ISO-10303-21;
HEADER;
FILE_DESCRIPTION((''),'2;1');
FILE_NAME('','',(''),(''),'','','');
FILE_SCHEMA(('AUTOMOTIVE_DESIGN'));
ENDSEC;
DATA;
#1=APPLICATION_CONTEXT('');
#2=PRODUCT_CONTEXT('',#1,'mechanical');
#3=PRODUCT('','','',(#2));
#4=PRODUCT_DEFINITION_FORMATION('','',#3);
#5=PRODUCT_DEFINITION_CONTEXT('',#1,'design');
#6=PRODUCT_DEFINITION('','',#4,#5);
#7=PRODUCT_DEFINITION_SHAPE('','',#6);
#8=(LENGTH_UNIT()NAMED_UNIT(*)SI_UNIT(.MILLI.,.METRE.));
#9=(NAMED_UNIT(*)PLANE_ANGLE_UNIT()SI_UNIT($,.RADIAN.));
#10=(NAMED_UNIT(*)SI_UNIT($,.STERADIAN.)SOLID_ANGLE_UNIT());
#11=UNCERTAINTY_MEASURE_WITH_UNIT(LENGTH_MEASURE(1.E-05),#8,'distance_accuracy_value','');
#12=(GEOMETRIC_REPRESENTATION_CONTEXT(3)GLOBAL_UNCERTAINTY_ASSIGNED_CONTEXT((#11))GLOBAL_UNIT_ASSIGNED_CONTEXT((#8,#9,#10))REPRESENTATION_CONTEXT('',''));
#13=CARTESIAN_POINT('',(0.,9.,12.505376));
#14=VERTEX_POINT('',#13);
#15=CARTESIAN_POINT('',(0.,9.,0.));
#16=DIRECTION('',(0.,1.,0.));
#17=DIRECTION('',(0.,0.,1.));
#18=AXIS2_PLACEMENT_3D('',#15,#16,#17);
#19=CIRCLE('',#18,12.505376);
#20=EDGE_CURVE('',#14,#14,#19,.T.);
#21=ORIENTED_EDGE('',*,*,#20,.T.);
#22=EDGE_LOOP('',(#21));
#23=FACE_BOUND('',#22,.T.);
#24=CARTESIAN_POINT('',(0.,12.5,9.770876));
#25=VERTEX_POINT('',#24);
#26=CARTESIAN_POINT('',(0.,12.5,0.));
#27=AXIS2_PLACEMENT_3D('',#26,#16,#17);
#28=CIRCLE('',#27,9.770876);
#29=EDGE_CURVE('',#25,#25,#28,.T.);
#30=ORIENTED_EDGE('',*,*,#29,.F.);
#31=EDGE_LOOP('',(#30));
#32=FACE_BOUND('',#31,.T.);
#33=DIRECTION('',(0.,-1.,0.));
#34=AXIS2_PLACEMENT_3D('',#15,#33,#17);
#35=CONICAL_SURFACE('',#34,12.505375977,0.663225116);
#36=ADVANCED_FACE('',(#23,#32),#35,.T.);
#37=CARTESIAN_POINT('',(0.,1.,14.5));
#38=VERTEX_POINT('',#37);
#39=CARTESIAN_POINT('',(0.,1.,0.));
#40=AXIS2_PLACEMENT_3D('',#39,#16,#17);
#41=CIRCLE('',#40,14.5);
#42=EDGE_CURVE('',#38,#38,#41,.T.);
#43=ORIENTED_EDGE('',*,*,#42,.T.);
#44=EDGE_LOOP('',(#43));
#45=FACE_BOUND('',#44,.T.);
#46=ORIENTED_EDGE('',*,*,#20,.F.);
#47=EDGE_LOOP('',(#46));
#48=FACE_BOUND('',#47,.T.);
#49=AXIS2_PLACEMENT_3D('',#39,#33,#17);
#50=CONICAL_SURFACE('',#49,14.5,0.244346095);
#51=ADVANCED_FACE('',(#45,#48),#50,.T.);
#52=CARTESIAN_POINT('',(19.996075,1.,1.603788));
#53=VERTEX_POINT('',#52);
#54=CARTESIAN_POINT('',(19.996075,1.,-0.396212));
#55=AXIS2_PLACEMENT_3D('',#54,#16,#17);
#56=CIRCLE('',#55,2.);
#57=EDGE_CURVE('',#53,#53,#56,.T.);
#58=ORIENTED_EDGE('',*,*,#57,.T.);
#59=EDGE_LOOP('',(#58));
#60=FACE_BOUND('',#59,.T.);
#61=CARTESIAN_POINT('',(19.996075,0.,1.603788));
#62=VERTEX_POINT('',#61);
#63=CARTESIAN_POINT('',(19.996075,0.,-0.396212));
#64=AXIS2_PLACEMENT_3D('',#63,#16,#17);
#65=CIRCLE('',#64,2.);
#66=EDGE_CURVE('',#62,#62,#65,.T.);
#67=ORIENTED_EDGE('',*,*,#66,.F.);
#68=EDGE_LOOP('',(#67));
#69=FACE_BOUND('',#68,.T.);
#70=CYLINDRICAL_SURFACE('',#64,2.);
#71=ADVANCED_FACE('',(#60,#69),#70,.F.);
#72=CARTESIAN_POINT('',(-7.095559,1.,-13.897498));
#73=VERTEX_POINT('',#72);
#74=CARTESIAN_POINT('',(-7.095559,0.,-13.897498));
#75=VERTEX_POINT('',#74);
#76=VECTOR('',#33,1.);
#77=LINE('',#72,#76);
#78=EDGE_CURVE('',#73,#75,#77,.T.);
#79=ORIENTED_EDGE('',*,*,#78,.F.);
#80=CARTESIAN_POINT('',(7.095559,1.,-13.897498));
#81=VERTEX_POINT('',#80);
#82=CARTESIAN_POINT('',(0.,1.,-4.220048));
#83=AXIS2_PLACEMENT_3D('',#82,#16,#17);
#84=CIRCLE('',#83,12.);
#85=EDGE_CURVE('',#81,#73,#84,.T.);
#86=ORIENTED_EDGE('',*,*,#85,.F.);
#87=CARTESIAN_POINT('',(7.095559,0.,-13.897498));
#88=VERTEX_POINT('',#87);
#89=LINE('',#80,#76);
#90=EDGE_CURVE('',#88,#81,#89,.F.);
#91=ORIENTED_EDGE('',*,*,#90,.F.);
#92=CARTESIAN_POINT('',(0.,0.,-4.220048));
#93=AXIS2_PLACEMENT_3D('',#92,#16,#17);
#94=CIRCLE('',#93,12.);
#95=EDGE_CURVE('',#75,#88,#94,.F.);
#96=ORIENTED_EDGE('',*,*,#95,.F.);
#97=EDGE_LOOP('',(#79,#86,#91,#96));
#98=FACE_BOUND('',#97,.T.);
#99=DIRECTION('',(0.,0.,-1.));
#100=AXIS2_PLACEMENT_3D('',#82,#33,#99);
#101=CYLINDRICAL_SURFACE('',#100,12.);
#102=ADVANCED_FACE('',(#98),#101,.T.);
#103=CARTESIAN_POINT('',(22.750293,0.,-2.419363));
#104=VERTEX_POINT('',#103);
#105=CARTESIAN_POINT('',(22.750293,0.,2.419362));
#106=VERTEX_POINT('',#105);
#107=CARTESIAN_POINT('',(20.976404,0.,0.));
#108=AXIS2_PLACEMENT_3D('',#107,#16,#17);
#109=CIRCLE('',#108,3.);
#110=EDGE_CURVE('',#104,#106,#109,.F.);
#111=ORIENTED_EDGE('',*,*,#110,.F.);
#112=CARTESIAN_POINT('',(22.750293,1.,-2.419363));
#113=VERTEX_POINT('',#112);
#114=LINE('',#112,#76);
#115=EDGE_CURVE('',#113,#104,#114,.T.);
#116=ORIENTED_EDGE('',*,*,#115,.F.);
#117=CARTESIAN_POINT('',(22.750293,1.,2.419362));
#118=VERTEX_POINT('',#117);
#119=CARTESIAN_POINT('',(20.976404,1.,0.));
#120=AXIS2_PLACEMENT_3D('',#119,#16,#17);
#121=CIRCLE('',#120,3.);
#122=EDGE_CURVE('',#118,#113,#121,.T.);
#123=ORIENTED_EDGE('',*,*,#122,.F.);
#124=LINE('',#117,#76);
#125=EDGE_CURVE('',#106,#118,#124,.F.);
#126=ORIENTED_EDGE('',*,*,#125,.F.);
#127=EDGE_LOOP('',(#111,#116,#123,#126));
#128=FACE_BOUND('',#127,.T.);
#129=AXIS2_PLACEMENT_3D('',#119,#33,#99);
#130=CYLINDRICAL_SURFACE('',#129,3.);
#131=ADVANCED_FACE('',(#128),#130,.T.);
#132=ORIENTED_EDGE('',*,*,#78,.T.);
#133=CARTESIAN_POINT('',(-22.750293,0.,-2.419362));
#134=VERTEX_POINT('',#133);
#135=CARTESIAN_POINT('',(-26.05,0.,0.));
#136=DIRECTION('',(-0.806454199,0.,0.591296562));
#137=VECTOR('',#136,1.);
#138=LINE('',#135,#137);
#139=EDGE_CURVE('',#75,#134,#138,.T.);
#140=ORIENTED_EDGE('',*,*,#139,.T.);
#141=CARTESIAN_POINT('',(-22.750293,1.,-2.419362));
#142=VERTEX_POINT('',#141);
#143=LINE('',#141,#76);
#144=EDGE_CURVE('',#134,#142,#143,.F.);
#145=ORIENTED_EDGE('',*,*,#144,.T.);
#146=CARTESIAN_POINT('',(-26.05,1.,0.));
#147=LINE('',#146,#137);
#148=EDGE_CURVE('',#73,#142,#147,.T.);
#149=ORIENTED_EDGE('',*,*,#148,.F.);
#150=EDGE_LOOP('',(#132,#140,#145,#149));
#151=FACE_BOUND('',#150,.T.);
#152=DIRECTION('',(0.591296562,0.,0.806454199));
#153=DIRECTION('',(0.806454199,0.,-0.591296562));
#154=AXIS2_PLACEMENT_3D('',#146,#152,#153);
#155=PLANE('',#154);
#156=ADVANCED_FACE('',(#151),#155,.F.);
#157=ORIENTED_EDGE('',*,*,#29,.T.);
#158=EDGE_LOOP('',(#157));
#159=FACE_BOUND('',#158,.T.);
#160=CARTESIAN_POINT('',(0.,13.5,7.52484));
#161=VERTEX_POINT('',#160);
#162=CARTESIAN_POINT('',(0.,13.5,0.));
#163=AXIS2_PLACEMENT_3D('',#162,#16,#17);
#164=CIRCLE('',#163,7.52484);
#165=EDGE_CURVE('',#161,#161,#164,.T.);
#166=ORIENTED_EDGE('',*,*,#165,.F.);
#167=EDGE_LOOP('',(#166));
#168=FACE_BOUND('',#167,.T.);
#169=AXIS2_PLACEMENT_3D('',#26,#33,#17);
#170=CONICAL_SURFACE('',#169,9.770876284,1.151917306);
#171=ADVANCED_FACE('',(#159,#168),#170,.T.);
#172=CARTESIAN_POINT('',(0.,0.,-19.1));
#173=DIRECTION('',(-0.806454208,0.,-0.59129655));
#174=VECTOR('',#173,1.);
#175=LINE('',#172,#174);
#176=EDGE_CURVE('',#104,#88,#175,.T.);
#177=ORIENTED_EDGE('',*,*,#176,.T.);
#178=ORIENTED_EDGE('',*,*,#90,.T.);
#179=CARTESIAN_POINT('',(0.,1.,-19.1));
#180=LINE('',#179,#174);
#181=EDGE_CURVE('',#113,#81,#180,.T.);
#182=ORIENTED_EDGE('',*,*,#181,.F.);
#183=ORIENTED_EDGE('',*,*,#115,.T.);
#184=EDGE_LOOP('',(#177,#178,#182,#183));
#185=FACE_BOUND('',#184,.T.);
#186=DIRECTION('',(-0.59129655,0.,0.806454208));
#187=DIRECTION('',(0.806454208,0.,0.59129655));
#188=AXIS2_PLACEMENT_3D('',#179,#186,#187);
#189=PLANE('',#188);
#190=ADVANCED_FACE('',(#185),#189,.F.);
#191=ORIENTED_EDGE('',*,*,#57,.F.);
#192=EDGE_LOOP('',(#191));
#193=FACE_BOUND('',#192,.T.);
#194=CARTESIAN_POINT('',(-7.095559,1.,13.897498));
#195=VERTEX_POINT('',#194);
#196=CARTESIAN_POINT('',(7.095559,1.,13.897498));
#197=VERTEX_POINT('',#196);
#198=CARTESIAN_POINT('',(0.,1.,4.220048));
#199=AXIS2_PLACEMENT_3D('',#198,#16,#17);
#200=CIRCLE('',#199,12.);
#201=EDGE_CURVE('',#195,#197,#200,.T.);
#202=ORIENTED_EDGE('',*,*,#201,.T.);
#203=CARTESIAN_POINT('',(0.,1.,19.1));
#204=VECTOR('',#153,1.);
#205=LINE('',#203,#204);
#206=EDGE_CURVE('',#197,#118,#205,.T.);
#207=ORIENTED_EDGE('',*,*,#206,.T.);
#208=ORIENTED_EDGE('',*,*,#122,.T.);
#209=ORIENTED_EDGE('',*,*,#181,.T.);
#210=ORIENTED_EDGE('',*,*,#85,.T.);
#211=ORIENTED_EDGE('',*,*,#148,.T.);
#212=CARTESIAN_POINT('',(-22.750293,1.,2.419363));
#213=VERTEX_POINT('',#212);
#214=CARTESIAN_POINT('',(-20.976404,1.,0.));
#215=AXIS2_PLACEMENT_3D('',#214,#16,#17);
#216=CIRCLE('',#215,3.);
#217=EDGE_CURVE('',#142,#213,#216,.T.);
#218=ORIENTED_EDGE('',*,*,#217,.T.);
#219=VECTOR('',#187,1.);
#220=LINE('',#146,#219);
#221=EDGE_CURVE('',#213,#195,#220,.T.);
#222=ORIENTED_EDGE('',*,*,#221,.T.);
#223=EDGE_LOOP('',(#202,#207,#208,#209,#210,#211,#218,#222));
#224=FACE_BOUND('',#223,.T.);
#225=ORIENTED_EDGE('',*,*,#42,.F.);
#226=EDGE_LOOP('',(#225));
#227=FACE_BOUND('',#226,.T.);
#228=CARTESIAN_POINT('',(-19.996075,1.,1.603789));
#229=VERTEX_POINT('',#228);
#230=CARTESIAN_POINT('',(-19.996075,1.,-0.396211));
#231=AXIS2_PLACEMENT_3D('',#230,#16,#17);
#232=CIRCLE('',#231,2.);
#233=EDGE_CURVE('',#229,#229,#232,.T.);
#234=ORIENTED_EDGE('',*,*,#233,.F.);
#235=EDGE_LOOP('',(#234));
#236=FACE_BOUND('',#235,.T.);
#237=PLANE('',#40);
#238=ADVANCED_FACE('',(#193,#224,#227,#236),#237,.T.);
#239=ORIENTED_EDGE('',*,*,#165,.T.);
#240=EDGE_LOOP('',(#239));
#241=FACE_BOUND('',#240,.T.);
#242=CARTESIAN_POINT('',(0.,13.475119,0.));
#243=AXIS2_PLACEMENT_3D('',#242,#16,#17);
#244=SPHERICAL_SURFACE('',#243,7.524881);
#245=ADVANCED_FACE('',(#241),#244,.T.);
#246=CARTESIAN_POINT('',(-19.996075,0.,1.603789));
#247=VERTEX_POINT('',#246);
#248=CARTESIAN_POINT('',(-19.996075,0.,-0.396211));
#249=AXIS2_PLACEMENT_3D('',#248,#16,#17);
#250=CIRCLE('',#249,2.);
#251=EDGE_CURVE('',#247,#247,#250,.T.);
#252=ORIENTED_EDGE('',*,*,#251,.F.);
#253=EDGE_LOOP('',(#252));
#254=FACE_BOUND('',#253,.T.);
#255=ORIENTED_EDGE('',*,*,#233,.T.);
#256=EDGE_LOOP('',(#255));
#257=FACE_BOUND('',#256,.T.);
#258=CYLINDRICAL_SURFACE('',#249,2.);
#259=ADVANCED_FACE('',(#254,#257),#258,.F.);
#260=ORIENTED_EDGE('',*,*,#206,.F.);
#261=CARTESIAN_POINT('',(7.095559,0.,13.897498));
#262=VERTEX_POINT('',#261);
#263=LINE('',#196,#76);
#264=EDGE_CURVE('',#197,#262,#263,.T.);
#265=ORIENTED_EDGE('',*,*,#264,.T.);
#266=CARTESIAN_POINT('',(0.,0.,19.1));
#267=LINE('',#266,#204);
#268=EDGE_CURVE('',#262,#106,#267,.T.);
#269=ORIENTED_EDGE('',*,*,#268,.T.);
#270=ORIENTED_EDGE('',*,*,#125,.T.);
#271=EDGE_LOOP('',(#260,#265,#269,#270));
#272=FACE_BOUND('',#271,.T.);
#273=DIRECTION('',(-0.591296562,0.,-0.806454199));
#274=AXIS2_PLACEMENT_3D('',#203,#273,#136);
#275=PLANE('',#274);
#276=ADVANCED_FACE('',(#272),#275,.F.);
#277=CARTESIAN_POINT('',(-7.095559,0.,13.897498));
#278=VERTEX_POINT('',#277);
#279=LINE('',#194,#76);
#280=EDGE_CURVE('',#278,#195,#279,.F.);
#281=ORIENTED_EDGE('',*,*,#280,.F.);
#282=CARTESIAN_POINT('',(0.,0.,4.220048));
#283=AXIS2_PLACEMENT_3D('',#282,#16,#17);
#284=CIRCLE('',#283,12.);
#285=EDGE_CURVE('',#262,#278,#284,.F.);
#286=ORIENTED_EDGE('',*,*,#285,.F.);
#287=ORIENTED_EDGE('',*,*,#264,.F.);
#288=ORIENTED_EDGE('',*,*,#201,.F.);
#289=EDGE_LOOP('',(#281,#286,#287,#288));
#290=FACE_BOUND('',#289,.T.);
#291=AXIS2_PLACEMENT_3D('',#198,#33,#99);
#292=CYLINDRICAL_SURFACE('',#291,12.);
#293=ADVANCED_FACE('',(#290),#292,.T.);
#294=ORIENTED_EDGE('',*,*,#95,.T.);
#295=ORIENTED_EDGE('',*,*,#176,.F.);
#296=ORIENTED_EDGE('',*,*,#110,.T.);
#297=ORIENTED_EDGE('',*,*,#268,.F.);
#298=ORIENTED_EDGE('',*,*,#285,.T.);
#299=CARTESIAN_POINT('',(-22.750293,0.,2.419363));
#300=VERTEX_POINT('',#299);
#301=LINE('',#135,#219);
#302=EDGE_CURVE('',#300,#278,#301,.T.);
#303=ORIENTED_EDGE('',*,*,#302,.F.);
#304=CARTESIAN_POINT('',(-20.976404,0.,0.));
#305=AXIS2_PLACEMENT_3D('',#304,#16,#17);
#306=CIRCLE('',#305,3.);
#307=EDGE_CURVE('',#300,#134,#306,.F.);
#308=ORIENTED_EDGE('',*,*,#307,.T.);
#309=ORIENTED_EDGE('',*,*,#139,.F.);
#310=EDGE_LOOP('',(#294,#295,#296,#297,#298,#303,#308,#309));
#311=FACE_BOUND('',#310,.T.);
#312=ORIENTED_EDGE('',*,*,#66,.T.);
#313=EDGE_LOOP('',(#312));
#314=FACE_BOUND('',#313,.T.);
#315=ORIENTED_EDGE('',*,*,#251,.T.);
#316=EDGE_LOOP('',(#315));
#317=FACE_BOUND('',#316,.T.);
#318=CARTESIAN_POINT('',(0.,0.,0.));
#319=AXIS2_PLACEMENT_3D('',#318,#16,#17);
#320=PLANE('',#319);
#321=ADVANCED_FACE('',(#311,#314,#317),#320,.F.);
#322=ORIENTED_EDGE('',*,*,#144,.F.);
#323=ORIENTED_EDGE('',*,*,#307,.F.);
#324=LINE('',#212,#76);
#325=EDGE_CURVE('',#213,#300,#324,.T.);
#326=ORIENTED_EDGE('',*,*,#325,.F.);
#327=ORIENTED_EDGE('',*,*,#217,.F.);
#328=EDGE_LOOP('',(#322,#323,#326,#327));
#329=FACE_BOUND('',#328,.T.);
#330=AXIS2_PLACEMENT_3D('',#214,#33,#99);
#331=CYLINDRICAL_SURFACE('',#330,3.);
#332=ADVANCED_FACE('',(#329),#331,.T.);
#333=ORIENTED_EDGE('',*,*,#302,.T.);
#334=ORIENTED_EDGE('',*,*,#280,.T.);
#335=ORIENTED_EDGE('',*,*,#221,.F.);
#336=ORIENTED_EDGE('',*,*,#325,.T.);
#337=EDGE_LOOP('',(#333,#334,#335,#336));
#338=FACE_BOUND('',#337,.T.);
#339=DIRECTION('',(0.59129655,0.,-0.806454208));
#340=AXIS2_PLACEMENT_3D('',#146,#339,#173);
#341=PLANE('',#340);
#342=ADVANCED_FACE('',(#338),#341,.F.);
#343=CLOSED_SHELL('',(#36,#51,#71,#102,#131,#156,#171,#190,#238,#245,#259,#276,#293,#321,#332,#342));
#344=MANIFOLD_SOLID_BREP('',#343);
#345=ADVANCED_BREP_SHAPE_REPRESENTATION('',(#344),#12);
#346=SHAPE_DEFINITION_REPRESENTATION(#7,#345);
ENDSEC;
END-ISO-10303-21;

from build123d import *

# Parameters (mm, degrees)
BOSS_EXTRUDE1_DEPTH = 1
FILLET2_R           = 3
FILLET3_R           = 12
SKETCH2_R           = 2
CUT_EXTRUDE1_DEPTH  = 1
SKETCH3_R           = 14.5
BOSS_EXTRUDE2_DEPTH = 8
BOSS_EXTRUDE2_TAPER = 14
SKETCH6_R           = 12.505375977
BOSS_EXTRUDE4_DEPTH = 3.5
BOSS_EXTRUDE4_TAPER = 38
SKETCH7_R           = 9.770876284
BOSS_EXTRUDE5_DEPTH = 1
BOSS_EXTRUDE5_TAPER = 66


# Read off the part's stored shape, not the designer's step: Dome4
with BuildPart() as part:
    # Sketch1 → Boss-Extrude1 (new body)
    with BuildSketch(Plane(origin=(0, 0, 0), x_dir=(1, 0, 0), z_dir=(0, 1, 0))):
        Polygon((-26.05, -2.94e-07), (0, 19.1), (26.05, 2.94e-07), (0, -19.1), align=None)
    extrude(amount=BOSS_EXTRUDE1_DEPTH)

    # Fillet2
    fillet2_edges = [part.edges().sort_by_distance(p)[0] for p in [
        (26.05, 0.5, -2.94e-07),
        (-26.05, 0.5, 2.94e-07),
    ]]
    fillet(fillet2_edges, radius=FILLET2_R)

    # Fillet3
    fillet3_edges = [part.edges().sort_by_distance(p)[0] for p in [
        (0, 0.5, 19.1),
        (0, 0.5, -19.1),
    ]]
    fillet(fillet3_edges, radius=FILLET3_R)

    # Sketch2 → Cut-Extrude1 (cut)
    with BuildSketch(Plane(origin=(0, 1, 0), x_dir=(1, 0, 0), z_dir=(0, 1, 0))):
        with Locations(Location((-19.996075031, 0.396211257, 0), (0, 0, 270))):
            Circle(SKETCH2_R)
        with Locations(Location((19.996075025, 0.39621155, 0), (0, 0, 270))):
            Circle(SKETCH2_R)
    extrude(amount=-CUT_EXTRUDE1_DEPTH, mode=Mode.SUBTRACT)

    # Sketch3 → Boss-Extrude2 (add)
    with BuildSketch(Plane(origin=(0, 1, 0), x_dir=(1, 0, 0), z_dir=(0, 1, 0))):
        Circle(SKETCH3_R)
    extrude(amount=BOSS_EXTRUDE2_DEPTH, taper=BOSS_EXTRUDE2_TAPER)

    # Sketch6 → Boss-Extrude4 (add)
    with BuildSketch(Plane(origin=(0, 9, 0), x_dir=(1, 0, 0), z_dir=(0, 1, 0))):
        Circle(SKETCH6_R)
    extrude(amount=BOSS_EXTRUDE4_DEPTH, taper=BOSS_EXTRUDE4_TAPER)

    # Sketch7 → Boss-Extrude5 (add)
    with BuildSketch(Plane(origin=(0, 12.5, 0), x_dir=(1, 0, 0), z_dir=(0, 1, 0))):
        Circle(SKETCH7_R)
    extrude(amount=BOSS_EXTRUDE5_DEPTH, taper=BOSS_EXTRUDE5_TAPER)

    # Dome4 outline → Dome4 (revolve)
    with BuildSketch(Plane.XY):
        with BuildLine():
            Line((0, 13.5), (7.524839511, 13.499999992))
            ThreePointArc((7.524839511, 13.499999992), (5.312090214, 18.804802861), (0, 21))
            Line((0, 21), (0, 13.5))
        make_face()
    revolve(axis=Axis((0, 0, 0), (0, 1, 0)))


solid = part.part
